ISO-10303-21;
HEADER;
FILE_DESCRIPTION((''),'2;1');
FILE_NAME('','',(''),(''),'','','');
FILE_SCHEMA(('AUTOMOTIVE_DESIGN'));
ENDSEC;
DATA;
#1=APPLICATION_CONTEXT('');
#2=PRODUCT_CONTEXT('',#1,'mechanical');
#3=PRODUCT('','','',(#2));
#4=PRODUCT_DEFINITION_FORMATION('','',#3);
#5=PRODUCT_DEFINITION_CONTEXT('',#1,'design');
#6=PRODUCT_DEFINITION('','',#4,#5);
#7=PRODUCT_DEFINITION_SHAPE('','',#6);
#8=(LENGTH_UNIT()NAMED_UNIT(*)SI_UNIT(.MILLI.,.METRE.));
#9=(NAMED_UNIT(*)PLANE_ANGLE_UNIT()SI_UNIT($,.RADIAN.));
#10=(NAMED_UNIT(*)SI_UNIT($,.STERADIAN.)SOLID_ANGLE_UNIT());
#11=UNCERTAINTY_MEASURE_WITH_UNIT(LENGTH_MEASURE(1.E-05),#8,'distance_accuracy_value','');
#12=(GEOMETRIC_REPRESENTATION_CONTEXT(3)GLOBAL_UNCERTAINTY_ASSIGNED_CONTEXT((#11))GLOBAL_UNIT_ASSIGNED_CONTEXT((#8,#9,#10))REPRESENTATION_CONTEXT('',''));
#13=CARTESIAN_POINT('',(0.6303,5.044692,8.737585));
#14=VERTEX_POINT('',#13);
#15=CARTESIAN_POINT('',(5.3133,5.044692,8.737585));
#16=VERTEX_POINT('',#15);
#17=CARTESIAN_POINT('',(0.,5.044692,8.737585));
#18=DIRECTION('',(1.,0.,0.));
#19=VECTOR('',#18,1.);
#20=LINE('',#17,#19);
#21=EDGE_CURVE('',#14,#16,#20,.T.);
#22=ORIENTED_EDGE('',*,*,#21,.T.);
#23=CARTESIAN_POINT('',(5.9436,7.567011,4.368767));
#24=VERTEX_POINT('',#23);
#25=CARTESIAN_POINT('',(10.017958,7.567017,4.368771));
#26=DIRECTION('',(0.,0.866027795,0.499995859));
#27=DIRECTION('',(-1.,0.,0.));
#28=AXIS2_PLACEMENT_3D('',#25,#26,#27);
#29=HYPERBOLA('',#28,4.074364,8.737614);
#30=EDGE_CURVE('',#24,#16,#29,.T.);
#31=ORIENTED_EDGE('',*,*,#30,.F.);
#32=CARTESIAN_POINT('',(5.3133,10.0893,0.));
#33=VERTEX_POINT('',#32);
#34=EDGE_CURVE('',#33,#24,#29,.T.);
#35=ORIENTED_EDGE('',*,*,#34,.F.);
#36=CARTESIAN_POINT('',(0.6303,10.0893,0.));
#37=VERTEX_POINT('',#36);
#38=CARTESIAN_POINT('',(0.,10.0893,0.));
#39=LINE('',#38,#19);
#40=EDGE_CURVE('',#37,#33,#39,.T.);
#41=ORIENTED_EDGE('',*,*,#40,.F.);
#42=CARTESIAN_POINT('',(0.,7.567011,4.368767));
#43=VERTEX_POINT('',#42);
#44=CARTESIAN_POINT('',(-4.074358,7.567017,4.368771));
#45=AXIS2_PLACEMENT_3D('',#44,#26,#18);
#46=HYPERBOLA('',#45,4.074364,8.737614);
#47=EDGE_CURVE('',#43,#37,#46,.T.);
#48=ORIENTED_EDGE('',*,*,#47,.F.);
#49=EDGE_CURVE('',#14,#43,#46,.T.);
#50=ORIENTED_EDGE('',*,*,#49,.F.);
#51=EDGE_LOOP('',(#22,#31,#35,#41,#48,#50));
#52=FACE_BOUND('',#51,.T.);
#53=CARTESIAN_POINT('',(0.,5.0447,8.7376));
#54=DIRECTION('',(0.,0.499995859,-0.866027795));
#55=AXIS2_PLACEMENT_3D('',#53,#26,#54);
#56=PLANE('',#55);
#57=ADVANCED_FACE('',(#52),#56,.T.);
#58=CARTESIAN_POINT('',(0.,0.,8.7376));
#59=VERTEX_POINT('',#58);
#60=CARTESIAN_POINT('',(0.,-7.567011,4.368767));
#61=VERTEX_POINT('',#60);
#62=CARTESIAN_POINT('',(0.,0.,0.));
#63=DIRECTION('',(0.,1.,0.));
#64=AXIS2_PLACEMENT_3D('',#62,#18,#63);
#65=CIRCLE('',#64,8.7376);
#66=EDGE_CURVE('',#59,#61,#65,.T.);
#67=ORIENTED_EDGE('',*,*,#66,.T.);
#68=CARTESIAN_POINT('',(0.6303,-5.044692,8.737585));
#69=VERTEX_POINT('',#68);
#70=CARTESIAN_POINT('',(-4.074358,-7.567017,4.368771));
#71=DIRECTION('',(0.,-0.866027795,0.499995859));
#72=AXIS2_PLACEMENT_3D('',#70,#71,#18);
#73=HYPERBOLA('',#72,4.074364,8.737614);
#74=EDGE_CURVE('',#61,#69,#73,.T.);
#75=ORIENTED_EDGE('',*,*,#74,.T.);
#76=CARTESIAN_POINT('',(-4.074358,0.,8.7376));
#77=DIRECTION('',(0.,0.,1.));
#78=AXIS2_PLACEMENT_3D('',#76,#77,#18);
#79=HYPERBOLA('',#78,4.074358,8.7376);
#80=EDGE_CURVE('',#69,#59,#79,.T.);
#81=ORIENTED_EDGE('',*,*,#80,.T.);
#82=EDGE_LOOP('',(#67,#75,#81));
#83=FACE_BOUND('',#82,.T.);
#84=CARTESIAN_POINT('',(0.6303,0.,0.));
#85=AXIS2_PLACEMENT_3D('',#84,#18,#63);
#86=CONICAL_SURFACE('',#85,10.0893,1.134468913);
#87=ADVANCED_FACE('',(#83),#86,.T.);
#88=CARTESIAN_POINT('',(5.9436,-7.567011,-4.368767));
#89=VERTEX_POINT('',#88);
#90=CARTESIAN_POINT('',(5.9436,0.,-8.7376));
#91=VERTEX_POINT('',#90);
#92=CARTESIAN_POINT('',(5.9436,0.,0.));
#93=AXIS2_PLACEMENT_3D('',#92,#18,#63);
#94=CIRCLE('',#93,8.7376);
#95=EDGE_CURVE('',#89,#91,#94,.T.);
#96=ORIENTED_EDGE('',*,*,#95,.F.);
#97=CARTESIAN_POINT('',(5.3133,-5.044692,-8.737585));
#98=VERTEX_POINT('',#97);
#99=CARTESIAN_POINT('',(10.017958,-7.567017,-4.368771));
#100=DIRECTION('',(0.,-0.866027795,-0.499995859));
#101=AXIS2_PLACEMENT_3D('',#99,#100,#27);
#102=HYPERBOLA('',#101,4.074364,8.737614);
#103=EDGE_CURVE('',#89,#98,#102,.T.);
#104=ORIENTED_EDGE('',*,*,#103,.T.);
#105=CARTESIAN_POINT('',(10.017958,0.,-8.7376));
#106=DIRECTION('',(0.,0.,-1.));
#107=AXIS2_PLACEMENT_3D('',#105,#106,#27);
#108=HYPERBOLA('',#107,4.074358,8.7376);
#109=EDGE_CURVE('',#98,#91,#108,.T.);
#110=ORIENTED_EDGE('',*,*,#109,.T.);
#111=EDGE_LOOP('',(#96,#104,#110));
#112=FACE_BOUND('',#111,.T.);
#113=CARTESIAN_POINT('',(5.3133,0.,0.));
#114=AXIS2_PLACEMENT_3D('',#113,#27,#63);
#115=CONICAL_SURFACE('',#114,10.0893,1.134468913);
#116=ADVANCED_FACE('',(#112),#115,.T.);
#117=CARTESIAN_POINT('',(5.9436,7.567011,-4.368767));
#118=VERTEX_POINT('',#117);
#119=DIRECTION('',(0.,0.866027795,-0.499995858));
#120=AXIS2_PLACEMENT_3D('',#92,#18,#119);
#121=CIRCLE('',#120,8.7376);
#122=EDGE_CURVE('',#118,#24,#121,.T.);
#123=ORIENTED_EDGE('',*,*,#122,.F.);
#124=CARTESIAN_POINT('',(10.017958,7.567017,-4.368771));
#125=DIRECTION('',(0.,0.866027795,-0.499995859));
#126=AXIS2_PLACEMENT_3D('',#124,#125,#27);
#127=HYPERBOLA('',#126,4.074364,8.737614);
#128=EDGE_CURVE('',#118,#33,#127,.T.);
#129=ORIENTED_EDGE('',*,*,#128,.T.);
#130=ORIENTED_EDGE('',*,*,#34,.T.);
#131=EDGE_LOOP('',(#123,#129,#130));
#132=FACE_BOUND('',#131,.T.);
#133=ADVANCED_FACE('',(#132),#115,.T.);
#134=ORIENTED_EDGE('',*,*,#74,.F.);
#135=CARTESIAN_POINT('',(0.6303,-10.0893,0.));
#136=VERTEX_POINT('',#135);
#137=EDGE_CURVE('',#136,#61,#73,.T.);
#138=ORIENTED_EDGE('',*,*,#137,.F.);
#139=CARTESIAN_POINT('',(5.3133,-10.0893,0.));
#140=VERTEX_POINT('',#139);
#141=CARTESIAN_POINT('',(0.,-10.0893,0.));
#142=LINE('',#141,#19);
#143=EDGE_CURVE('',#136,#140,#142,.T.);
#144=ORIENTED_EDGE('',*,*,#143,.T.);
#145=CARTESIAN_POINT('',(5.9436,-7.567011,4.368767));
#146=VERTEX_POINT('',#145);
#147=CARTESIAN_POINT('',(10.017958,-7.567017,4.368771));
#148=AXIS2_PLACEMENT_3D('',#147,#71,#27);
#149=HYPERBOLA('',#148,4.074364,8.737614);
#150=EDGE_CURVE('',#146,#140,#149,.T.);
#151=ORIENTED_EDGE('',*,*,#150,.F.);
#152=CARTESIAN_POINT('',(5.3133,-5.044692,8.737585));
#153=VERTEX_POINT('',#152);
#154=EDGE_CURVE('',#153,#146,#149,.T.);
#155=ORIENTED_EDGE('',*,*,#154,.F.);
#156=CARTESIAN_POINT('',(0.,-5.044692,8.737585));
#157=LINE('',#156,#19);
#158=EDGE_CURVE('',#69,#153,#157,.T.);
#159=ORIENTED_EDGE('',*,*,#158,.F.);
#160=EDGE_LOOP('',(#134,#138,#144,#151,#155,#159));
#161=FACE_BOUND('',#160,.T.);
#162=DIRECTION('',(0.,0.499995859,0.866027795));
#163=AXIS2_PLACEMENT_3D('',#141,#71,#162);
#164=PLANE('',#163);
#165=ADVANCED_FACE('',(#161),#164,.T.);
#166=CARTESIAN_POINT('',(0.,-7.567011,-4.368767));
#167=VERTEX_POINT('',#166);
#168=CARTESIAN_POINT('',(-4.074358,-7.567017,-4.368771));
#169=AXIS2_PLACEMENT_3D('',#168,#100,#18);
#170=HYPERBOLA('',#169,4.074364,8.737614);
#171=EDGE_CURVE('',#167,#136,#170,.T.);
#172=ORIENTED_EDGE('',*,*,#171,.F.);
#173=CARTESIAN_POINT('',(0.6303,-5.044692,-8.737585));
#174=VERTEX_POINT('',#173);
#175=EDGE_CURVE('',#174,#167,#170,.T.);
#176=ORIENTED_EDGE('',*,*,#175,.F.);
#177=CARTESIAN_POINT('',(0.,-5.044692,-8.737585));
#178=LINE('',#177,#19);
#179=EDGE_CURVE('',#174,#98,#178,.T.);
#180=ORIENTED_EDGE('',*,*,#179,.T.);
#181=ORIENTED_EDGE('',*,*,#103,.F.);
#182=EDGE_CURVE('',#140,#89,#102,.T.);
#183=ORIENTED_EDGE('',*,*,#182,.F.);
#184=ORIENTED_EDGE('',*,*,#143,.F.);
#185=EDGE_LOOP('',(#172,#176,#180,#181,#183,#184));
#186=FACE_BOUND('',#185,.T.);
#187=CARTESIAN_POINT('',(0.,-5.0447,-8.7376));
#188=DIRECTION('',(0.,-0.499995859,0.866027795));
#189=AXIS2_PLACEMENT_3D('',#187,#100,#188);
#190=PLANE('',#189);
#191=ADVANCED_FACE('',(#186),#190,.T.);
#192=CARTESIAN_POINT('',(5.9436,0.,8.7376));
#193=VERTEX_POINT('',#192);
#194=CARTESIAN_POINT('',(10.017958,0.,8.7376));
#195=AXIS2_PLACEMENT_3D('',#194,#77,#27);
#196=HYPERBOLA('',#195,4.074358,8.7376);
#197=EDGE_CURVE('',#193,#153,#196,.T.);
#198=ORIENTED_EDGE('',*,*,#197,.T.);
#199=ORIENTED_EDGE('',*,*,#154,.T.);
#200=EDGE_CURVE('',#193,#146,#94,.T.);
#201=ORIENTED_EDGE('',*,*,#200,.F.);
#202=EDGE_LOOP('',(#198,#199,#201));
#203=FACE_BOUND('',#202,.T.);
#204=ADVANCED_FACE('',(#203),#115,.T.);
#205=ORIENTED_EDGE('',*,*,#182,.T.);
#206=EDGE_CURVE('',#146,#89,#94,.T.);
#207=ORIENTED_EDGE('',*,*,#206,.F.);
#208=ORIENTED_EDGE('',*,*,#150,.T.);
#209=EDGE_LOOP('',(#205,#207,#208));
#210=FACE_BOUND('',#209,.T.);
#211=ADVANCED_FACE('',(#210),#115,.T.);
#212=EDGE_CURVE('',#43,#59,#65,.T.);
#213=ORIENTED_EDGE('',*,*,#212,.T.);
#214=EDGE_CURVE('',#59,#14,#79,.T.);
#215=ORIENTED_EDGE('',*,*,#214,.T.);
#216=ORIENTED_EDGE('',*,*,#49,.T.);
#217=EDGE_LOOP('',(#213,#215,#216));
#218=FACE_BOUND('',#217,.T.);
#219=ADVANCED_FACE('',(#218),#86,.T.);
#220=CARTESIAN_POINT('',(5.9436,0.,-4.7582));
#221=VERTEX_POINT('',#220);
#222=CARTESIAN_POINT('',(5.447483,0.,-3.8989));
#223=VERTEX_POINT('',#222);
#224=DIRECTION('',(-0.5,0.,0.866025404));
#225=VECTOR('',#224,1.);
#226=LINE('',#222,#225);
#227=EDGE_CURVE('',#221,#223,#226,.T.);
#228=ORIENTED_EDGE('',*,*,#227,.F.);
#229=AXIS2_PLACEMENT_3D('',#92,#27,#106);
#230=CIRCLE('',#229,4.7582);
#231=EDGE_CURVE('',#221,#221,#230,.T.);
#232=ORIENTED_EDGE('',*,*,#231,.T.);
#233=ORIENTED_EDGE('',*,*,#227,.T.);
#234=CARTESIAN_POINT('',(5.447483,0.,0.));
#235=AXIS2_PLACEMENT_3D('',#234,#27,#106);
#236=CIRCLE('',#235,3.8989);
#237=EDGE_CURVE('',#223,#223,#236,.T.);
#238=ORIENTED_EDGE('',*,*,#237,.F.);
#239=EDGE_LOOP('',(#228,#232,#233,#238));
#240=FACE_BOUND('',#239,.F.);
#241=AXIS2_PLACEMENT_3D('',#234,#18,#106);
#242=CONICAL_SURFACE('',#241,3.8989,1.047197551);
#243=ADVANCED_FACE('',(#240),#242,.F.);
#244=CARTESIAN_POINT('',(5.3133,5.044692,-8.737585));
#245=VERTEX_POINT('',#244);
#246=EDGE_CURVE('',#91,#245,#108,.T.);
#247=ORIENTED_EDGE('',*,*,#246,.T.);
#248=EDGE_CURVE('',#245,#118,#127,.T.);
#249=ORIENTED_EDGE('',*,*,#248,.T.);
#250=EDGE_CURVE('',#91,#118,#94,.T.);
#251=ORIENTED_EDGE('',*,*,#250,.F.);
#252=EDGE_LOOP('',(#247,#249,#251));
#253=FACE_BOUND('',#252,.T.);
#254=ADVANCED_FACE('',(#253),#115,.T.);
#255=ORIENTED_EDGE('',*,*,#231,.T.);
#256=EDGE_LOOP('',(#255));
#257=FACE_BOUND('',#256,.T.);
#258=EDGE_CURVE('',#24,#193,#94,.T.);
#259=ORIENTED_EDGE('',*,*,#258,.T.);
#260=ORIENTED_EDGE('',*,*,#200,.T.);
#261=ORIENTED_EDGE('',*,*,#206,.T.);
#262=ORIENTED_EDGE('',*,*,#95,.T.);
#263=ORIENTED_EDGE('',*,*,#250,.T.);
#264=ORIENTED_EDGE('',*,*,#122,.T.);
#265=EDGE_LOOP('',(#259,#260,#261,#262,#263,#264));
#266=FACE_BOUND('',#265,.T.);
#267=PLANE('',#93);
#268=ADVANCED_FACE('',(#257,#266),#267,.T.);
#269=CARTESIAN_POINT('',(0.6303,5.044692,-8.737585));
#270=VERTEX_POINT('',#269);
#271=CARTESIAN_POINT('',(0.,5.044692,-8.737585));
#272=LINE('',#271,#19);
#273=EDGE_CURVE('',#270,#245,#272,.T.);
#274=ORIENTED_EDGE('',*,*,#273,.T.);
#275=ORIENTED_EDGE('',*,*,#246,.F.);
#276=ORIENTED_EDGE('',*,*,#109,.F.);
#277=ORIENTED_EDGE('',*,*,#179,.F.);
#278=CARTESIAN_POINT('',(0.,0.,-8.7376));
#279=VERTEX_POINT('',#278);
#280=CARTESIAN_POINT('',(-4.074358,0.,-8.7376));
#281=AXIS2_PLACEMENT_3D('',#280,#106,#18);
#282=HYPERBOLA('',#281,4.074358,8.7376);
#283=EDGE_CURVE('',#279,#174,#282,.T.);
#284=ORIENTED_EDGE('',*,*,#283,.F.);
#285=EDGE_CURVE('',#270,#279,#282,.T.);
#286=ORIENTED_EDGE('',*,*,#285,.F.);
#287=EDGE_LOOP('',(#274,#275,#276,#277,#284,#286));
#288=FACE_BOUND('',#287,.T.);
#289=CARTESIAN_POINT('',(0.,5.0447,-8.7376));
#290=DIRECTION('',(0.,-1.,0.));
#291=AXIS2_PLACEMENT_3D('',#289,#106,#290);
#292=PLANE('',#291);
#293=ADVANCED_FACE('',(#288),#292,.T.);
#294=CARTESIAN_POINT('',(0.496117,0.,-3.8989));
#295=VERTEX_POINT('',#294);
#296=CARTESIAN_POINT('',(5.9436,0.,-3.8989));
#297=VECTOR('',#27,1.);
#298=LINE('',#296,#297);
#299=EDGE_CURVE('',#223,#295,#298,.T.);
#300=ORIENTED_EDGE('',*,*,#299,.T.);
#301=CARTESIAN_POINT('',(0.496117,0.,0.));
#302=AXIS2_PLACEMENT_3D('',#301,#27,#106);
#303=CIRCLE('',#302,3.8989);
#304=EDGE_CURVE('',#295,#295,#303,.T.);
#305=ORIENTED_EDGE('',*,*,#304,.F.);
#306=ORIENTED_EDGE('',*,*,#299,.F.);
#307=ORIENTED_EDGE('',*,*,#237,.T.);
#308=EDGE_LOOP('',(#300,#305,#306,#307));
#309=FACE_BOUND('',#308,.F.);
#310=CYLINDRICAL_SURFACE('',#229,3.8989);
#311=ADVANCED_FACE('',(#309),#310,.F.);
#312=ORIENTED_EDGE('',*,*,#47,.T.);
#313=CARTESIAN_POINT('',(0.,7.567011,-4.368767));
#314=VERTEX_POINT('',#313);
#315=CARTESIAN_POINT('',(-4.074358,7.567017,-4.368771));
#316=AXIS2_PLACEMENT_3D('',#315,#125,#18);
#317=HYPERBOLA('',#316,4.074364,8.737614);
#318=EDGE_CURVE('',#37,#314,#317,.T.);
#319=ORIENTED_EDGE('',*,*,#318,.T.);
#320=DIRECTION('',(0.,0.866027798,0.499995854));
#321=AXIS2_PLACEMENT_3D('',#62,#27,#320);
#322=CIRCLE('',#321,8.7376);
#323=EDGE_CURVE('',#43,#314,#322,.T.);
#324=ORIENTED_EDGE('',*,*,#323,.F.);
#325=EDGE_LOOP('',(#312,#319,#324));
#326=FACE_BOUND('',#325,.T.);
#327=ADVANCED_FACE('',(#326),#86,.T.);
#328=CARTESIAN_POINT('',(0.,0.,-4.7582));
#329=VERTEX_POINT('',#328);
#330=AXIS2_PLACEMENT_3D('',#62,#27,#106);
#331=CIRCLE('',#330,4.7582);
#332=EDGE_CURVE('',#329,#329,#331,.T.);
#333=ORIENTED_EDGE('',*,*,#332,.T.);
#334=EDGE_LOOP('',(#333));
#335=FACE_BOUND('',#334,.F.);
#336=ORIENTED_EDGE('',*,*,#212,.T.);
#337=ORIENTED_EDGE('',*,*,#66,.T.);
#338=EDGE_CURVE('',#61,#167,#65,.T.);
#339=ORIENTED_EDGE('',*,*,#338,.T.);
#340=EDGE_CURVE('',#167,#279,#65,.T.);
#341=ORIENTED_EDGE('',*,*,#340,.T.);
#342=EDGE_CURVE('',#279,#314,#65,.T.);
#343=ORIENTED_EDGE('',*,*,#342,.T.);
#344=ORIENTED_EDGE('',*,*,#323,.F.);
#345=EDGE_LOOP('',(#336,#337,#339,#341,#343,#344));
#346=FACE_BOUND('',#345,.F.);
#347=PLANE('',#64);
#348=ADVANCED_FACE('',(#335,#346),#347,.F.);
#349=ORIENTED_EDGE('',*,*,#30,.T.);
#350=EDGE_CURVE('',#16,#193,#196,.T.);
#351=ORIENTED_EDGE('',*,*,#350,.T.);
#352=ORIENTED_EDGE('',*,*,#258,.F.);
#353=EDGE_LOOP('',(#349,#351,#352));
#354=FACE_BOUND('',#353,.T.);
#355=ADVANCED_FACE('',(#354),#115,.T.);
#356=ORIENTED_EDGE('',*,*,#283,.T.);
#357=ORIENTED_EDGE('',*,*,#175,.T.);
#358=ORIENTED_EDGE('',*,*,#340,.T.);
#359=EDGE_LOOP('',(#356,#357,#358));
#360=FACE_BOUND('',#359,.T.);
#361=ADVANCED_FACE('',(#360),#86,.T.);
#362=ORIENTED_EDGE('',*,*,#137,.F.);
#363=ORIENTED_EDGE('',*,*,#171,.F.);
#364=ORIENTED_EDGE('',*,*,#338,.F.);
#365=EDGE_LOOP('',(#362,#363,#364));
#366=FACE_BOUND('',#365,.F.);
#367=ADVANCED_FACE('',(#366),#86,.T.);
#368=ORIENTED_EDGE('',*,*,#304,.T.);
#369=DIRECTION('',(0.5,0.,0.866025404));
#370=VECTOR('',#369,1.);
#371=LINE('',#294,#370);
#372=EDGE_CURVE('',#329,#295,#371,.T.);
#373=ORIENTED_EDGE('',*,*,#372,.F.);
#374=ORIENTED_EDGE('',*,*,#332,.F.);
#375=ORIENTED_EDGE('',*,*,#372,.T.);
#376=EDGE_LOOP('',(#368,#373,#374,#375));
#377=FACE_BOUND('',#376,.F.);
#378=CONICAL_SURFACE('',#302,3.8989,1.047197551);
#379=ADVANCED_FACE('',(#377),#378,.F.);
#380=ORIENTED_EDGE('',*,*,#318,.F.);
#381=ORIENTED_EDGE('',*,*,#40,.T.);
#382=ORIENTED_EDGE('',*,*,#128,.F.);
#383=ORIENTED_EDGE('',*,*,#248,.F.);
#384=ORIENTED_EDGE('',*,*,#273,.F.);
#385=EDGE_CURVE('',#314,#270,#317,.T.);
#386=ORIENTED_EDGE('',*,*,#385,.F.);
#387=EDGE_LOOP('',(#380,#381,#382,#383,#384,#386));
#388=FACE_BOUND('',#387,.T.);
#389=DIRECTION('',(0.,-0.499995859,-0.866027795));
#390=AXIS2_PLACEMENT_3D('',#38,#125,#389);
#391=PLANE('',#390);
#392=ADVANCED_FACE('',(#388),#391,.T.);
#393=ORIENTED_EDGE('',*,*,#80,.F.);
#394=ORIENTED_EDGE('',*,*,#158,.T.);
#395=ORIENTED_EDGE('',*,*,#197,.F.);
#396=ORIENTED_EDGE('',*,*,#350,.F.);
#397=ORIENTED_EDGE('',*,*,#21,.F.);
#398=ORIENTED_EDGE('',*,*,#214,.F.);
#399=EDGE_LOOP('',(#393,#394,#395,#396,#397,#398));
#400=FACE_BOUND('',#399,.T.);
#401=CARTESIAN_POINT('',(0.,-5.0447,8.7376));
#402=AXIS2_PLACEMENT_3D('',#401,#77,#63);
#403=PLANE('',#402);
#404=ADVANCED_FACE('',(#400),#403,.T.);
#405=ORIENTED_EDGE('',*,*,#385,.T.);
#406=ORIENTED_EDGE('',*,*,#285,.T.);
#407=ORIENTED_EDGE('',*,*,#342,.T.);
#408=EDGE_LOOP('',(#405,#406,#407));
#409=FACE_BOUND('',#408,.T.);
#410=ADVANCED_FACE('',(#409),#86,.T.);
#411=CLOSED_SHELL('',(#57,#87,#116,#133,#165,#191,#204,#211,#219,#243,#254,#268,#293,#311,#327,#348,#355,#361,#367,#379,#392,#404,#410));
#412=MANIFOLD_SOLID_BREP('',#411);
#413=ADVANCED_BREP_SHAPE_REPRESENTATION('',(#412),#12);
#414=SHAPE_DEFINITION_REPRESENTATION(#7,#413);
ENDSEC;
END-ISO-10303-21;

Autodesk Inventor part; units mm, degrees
ref_plane "YZ Plane" through (0, 0, 0) normal (1, 0, 0) x (0, 1, 0)
ref_plane "XZ Plane" through (0, 0, 0) normal (0, 1, 0) x (-1, 0, 0)
sketch "Sketch1" plane through (0, 0, 0) normal (1, 0, 0) x (0, 1, 0)
  line L0 (-10.0893, 0) -> (-5.0447, 8.7376)
  line L1 (-5.0447, 8.7376) -> (5.0447, 8.7376)
  line L2 (5.0447, 8.7376) -> (10.0893, 0)
  line L3 (10.0893, 0) -> (5.0447, -8.7376)
  line L4 (5.0447, -8.7376) -> (-5.0447, -8.7376)
  line L5 (-5.0447, -8.7376) -> (-10.0893, 0)
  point P0 (0, 0)
  point P1 (0, 0)
  dimension "d0" = 20.1786
extrude "Body" add sketch "Sketch1" along normal blind 5.9436
sketch "Sketch2" plane through (0, 0, 0) normal (0, 0, 1) x (1, 0, 0)
  line L0 (0, 5.0447) -> (0, 10.0893) projected
  line L1 (0, 10.0893) -> (5.9436, 10.0893) projected
  line L2 (5.9436, 5.0447) -> (5.9436, 10.0893) projected
  line L3 (-1.1887, 0) -> (7.1323, 0) projected
  line L4 (0.6303, 10.0893) -> (0, 8.7376)
  line L5 (5.3133, 10.0893) -> (5.9436, 8.7376)
  dimension "d3" = 25
  dimension "d4" = 25
  dimension "d5" = 17.4752
  dimension "d6" = 17.4752
revolve "Chamfer1" cut sketch "Sketch2" angle 360 about axis through (-10, 0, 0) along (1, 0, 0)
sketch "Sketch3" plane through (5.9436, 0, 0) normal (1, 0, 0) x (0, 0, -1)
  arc A0 (-4.3688, -7.567) -> (4.3688, -7.567) centre (0, 0) ccw projected
hole "Thread" at (5.9436, 0, 0) direction (-1, 0, 0) diameter 7.7978 end through all thread size "3/8-16 UNC" class "2B" standard "ANSI Unified Screw Threads"
chamfer "Chamfer2" distance 0.8593 angle 30 1 edges at (5.9436, 0, 3.8989) measured on face at (5.9436, 7.0833, -0.1567)
chamfer "Chamfer3" distance 0.8593 angle 30 1 edges at (0, 0, 3.8989) measured on face at (0, 7.0833, -0.1567)
ref_plane "Work Plane1" through (-21.4039, 0, 0) normal (0, -0.8660254, -0.5) x (1, 0, 0)
equation "\"d0\" = 1.1547 * SW"
equation "\"d1\" = KOH"
equation "\"d3\" = ANG1"
equation "\"d4\" = ANG2"
equation "\"d5\" = SW0"
equation "\"d6\" = SW01"
equation "\"d8\" = -0.5 * GD1 + 0.5 * NND"
equation "\"d40\" = -0.5 * GD1 + 0.5 * NND"
equation "\"d10\" = -0.5 * GD1 + 0.5 * NND"
equation "\"d41\" = -0.5 * GD1 + 0.5 * NND"
equation "\"ANG1\" = 25deg"
equation "\"ANG2\" = 25deg"
equation "\"NND\" = 9.525"
equation "\"KOH\" = 5.9436"
equation "\"SW\" = 17.4752"
equation "\"SW0\" = SW"
equation "\"SW01\" = SW"
equation "\"THREADDIA\" = 9.525"
equation "\"TOA\" = 30deg"
equation "\"E0\" = 1.155 * SW"
equation "\"GD1\" = 7.806481"
properties part number "ANSI B18.2.2 - 3/8 - 16, HHJNI" material "Steel, Mild"
